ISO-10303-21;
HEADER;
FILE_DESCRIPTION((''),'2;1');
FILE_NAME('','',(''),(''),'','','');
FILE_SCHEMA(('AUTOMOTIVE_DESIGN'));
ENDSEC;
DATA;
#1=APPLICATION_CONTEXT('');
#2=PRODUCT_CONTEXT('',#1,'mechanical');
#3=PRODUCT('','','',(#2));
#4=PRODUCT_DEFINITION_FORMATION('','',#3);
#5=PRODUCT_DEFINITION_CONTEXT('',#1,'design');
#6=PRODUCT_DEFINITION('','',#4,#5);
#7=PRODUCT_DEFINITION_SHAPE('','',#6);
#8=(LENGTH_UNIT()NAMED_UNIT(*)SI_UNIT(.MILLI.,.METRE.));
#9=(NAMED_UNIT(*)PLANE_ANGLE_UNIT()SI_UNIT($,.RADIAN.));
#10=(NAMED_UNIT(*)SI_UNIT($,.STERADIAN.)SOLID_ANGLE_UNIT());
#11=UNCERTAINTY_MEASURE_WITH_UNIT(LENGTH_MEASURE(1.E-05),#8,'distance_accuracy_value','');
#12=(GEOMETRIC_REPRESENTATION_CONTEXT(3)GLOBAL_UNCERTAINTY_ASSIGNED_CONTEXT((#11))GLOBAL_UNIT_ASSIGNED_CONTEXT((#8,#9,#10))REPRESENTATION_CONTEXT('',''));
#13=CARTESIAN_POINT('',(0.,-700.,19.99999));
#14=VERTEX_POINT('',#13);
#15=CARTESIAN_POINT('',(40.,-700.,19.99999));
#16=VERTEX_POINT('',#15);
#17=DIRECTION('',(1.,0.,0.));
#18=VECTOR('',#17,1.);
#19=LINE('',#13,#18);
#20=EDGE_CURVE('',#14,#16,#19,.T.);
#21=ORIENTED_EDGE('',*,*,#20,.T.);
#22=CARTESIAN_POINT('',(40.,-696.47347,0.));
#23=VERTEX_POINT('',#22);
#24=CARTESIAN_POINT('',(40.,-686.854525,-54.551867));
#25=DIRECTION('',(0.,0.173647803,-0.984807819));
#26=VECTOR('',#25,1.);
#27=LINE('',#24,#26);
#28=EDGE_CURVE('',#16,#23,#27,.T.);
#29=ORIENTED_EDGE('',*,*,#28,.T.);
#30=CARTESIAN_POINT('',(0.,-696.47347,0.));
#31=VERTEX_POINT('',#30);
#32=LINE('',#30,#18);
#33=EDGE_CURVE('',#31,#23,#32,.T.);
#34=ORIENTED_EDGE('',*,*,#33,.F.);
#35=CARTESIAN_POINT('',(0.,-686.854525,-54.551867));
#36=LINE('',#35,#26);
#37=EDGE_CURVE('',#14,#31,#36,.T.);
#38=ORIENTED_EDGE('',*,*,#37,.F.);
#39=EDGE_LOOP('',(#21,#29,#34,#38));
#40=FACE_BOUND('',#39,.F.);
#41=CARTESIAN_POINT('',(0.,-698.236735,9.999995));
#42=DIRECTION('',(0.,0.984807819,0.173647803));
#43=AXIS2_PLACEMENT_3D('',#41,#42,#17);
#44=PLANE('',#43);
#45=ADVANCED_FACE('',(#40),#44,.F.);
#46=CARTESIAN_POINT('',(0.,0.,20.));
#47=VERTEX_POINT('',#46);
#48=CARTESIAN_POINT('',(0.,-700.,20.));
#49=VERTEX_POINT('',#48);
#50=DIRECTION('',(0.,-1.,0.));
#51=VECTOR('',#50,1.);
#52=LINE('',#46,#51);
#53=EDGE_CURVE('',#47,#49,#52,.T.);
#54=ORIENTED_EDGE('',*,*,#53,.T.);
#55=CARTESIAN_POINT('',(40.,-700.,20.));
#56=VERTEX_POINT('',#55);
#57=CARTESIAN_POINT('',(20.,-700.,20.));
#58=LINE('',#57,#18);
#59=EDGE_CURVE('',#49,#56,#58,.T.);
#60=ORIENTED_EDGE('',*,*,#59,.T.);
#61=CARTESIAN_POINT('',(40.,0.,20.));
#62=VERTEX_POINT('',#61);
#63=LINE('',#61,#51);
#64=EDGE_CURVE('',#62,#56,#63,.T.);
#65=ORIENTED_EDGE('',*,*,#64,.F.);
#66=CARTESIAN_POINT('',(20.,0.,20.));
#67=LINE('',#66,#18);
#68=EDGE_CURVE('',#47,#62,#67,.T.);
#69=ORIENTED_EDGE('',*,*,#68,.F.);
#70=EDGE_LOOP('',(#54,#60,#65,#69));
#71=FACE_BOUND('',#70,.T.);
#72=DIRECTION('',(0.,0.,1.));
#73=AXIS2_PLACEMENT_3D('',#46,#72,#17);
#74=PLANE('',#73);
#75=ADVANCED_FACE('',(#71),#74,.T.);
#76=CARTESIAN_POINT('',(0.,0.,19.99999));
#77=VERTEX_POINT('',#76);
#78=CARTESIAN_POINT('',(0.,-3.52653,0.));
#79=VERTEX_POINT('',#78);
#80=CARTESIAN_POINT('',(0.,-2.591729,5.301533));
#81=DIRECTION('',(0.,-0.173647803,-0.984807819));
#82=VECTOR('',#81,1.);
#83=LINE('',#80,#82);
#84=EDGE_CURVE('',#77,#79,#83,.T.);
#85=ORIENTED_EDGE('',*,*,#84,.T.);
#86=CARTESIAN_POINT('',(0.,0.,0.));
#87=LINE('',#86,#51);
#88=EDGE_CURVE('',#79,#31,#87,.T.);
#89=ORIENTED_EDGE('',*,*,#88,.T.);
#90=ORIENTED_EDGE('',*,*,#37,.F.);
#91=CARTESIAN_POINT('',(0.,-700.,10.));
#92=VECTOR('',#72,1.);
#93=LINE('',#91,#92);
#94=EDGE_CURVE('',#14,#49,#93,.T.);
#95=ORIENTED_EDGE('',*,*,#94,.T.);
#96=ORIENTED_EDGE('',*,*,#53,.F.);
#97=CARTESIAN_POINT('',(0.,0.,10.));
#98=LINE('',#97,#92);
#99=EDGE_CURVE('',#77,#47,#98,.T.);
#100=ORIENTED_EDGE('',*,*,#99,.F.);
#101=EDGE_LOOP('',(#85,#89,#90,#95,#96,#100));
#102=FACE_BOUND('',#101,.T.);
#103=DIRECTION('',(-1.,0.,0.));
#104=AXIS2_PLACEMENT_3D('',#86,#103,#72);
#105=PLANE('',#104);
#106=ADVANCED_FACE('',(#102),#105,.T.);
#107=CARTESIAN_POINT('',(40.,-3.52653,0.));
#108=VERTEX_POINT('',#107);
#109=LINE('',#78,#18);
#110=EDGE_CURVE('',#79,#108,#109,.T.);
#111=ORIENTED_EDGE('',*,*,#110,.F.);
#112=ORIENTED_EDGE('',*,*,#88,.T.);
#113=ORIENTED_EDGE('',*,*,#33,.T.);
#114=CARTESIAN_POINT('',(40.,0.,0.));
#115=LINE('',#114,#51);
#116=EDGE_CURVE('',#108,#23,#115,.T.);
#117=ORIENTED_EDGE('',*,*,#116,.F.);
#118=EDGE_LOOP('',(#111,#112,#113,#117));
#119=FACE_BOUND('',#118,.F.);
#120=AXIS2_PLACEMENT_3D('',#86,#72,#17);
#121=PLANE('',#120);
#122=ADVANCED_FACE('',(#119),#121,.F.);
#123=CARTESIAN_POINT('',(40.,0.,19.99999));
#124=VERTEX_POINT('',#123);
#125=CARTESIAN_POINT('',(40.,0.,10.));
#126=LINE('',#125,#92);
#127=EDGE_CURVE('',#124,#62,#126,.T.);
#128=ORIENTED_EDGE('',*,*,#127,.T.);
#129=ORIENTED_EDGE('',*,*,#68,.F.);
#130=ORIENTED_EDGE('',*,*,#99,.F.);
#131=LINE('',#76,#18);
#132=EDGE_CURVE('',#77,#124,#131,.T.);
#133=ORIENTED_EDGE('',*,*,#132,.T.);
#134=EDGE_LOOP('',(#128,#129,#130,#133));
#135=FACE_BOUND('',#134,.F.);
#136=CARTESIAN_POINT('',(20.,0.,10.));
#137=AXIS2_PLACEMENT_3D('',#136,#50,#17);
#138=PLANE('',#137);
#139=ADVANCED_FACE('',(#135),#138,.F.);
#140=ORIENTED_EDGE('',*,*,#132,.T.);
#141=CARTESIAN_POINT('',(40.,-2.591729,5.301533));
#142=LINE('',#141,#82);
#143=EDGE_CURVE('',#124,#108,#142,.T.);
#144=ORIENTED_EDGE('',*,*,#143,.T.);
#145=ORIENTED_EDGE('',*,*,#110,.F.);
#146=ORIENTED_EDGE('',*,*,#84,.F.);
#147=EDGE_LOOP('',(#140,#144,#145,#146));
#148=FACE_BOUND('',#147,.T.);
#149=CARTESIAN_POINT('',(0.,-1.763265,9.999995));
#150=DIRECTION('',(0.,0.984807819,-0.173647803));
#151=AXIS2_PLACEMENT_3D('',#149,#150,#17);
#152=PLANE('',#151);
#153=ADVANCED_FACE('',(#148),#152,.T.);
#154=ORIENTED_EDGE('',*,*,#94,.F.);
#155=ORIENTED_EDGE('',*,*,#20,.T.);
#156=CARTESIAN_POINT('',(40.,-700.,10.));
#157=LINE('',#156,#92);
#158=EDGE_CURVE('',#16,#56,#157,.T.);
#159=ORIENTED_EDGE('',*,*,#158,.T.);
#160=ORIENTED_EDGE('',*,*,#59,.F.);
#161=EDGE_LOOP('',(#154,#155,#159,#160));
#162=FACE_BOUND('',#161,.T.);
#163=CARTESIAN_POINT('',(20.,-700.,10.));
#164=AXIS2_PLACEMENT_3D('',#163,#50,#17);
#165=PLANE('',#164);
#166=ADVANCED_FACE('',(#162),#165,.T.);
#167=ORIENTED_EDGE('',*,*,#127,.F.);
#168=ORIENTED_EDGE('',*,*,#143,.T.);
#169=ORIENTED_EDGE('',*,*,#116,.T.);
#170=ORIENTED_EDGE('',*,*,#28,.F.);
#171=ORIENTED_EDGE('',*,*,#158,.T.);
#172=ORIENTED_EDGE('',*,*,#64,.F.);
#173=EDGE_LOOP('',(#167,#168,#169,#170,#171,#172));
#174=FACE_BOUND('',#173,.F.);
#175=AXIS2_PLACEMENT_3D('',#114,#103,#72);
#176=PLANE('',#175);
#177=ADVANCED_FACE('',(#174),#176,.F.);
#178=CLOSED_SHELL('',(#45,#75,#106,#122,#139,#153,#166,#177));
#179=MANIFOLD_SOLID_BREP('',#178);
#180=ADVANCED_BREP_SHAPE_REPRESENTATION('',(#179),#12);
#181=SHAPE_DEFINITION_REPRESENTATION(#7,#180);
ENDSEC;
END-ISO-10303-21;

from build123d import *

# Parameters (mm, degrees)
F0_W     = 40
F0_H     = 20
F1_DEPTH = 700
F2_SIZE2 = 3.52653
F2_SIZE  = 19.99999
F3_SIZE2 = 3.52653
F3_SIZE  = 19.99999


# Not quite as in the source:
# - a fillet or chamfer is up to 0.001 mm smaller than in the source, because OpenCascade refuses the exact size


with BuildPart() as f1:
    # F0 (on Front) → F1 (new body)
    with BuildSketch(Plane.XZ):
        with Locations((20, 10)):
            Rectangle(F0_W, F0_H)
    extrude(amount=F1_DEPTH)

    # F2 (size 20 and 3.5265396142 in the source; OpenCascade refuses exactly that, so slightly less here)
    f2_edges = [f1.edges().sort_by_distance(p)[0] for p in [
        (20, -700, 0),
    ]]
    f2_side = f1.faces().sort_by_distance((20, -700, 10))[0]
    chamfer(f2_edges, length=F2_SIZE, length2=F2_SIZE2, reference=f2_side)

    # F3 (size 20 and 3.5265396142 in the source; OpenCascade refuses exactly that, so slightly less here)
    f3_edges = [f1.edges().sort_by_distance(p)[0] for p in [
        (20, 0, 0),
    ]]
    f3_side = f1.faces().sort_by_distance((20, 0, 10))[0]
    chamfer(f3_edges, length=F3_SIZE, length2=F3_SIZE2, reference=f3_side)


solid = f1.part
